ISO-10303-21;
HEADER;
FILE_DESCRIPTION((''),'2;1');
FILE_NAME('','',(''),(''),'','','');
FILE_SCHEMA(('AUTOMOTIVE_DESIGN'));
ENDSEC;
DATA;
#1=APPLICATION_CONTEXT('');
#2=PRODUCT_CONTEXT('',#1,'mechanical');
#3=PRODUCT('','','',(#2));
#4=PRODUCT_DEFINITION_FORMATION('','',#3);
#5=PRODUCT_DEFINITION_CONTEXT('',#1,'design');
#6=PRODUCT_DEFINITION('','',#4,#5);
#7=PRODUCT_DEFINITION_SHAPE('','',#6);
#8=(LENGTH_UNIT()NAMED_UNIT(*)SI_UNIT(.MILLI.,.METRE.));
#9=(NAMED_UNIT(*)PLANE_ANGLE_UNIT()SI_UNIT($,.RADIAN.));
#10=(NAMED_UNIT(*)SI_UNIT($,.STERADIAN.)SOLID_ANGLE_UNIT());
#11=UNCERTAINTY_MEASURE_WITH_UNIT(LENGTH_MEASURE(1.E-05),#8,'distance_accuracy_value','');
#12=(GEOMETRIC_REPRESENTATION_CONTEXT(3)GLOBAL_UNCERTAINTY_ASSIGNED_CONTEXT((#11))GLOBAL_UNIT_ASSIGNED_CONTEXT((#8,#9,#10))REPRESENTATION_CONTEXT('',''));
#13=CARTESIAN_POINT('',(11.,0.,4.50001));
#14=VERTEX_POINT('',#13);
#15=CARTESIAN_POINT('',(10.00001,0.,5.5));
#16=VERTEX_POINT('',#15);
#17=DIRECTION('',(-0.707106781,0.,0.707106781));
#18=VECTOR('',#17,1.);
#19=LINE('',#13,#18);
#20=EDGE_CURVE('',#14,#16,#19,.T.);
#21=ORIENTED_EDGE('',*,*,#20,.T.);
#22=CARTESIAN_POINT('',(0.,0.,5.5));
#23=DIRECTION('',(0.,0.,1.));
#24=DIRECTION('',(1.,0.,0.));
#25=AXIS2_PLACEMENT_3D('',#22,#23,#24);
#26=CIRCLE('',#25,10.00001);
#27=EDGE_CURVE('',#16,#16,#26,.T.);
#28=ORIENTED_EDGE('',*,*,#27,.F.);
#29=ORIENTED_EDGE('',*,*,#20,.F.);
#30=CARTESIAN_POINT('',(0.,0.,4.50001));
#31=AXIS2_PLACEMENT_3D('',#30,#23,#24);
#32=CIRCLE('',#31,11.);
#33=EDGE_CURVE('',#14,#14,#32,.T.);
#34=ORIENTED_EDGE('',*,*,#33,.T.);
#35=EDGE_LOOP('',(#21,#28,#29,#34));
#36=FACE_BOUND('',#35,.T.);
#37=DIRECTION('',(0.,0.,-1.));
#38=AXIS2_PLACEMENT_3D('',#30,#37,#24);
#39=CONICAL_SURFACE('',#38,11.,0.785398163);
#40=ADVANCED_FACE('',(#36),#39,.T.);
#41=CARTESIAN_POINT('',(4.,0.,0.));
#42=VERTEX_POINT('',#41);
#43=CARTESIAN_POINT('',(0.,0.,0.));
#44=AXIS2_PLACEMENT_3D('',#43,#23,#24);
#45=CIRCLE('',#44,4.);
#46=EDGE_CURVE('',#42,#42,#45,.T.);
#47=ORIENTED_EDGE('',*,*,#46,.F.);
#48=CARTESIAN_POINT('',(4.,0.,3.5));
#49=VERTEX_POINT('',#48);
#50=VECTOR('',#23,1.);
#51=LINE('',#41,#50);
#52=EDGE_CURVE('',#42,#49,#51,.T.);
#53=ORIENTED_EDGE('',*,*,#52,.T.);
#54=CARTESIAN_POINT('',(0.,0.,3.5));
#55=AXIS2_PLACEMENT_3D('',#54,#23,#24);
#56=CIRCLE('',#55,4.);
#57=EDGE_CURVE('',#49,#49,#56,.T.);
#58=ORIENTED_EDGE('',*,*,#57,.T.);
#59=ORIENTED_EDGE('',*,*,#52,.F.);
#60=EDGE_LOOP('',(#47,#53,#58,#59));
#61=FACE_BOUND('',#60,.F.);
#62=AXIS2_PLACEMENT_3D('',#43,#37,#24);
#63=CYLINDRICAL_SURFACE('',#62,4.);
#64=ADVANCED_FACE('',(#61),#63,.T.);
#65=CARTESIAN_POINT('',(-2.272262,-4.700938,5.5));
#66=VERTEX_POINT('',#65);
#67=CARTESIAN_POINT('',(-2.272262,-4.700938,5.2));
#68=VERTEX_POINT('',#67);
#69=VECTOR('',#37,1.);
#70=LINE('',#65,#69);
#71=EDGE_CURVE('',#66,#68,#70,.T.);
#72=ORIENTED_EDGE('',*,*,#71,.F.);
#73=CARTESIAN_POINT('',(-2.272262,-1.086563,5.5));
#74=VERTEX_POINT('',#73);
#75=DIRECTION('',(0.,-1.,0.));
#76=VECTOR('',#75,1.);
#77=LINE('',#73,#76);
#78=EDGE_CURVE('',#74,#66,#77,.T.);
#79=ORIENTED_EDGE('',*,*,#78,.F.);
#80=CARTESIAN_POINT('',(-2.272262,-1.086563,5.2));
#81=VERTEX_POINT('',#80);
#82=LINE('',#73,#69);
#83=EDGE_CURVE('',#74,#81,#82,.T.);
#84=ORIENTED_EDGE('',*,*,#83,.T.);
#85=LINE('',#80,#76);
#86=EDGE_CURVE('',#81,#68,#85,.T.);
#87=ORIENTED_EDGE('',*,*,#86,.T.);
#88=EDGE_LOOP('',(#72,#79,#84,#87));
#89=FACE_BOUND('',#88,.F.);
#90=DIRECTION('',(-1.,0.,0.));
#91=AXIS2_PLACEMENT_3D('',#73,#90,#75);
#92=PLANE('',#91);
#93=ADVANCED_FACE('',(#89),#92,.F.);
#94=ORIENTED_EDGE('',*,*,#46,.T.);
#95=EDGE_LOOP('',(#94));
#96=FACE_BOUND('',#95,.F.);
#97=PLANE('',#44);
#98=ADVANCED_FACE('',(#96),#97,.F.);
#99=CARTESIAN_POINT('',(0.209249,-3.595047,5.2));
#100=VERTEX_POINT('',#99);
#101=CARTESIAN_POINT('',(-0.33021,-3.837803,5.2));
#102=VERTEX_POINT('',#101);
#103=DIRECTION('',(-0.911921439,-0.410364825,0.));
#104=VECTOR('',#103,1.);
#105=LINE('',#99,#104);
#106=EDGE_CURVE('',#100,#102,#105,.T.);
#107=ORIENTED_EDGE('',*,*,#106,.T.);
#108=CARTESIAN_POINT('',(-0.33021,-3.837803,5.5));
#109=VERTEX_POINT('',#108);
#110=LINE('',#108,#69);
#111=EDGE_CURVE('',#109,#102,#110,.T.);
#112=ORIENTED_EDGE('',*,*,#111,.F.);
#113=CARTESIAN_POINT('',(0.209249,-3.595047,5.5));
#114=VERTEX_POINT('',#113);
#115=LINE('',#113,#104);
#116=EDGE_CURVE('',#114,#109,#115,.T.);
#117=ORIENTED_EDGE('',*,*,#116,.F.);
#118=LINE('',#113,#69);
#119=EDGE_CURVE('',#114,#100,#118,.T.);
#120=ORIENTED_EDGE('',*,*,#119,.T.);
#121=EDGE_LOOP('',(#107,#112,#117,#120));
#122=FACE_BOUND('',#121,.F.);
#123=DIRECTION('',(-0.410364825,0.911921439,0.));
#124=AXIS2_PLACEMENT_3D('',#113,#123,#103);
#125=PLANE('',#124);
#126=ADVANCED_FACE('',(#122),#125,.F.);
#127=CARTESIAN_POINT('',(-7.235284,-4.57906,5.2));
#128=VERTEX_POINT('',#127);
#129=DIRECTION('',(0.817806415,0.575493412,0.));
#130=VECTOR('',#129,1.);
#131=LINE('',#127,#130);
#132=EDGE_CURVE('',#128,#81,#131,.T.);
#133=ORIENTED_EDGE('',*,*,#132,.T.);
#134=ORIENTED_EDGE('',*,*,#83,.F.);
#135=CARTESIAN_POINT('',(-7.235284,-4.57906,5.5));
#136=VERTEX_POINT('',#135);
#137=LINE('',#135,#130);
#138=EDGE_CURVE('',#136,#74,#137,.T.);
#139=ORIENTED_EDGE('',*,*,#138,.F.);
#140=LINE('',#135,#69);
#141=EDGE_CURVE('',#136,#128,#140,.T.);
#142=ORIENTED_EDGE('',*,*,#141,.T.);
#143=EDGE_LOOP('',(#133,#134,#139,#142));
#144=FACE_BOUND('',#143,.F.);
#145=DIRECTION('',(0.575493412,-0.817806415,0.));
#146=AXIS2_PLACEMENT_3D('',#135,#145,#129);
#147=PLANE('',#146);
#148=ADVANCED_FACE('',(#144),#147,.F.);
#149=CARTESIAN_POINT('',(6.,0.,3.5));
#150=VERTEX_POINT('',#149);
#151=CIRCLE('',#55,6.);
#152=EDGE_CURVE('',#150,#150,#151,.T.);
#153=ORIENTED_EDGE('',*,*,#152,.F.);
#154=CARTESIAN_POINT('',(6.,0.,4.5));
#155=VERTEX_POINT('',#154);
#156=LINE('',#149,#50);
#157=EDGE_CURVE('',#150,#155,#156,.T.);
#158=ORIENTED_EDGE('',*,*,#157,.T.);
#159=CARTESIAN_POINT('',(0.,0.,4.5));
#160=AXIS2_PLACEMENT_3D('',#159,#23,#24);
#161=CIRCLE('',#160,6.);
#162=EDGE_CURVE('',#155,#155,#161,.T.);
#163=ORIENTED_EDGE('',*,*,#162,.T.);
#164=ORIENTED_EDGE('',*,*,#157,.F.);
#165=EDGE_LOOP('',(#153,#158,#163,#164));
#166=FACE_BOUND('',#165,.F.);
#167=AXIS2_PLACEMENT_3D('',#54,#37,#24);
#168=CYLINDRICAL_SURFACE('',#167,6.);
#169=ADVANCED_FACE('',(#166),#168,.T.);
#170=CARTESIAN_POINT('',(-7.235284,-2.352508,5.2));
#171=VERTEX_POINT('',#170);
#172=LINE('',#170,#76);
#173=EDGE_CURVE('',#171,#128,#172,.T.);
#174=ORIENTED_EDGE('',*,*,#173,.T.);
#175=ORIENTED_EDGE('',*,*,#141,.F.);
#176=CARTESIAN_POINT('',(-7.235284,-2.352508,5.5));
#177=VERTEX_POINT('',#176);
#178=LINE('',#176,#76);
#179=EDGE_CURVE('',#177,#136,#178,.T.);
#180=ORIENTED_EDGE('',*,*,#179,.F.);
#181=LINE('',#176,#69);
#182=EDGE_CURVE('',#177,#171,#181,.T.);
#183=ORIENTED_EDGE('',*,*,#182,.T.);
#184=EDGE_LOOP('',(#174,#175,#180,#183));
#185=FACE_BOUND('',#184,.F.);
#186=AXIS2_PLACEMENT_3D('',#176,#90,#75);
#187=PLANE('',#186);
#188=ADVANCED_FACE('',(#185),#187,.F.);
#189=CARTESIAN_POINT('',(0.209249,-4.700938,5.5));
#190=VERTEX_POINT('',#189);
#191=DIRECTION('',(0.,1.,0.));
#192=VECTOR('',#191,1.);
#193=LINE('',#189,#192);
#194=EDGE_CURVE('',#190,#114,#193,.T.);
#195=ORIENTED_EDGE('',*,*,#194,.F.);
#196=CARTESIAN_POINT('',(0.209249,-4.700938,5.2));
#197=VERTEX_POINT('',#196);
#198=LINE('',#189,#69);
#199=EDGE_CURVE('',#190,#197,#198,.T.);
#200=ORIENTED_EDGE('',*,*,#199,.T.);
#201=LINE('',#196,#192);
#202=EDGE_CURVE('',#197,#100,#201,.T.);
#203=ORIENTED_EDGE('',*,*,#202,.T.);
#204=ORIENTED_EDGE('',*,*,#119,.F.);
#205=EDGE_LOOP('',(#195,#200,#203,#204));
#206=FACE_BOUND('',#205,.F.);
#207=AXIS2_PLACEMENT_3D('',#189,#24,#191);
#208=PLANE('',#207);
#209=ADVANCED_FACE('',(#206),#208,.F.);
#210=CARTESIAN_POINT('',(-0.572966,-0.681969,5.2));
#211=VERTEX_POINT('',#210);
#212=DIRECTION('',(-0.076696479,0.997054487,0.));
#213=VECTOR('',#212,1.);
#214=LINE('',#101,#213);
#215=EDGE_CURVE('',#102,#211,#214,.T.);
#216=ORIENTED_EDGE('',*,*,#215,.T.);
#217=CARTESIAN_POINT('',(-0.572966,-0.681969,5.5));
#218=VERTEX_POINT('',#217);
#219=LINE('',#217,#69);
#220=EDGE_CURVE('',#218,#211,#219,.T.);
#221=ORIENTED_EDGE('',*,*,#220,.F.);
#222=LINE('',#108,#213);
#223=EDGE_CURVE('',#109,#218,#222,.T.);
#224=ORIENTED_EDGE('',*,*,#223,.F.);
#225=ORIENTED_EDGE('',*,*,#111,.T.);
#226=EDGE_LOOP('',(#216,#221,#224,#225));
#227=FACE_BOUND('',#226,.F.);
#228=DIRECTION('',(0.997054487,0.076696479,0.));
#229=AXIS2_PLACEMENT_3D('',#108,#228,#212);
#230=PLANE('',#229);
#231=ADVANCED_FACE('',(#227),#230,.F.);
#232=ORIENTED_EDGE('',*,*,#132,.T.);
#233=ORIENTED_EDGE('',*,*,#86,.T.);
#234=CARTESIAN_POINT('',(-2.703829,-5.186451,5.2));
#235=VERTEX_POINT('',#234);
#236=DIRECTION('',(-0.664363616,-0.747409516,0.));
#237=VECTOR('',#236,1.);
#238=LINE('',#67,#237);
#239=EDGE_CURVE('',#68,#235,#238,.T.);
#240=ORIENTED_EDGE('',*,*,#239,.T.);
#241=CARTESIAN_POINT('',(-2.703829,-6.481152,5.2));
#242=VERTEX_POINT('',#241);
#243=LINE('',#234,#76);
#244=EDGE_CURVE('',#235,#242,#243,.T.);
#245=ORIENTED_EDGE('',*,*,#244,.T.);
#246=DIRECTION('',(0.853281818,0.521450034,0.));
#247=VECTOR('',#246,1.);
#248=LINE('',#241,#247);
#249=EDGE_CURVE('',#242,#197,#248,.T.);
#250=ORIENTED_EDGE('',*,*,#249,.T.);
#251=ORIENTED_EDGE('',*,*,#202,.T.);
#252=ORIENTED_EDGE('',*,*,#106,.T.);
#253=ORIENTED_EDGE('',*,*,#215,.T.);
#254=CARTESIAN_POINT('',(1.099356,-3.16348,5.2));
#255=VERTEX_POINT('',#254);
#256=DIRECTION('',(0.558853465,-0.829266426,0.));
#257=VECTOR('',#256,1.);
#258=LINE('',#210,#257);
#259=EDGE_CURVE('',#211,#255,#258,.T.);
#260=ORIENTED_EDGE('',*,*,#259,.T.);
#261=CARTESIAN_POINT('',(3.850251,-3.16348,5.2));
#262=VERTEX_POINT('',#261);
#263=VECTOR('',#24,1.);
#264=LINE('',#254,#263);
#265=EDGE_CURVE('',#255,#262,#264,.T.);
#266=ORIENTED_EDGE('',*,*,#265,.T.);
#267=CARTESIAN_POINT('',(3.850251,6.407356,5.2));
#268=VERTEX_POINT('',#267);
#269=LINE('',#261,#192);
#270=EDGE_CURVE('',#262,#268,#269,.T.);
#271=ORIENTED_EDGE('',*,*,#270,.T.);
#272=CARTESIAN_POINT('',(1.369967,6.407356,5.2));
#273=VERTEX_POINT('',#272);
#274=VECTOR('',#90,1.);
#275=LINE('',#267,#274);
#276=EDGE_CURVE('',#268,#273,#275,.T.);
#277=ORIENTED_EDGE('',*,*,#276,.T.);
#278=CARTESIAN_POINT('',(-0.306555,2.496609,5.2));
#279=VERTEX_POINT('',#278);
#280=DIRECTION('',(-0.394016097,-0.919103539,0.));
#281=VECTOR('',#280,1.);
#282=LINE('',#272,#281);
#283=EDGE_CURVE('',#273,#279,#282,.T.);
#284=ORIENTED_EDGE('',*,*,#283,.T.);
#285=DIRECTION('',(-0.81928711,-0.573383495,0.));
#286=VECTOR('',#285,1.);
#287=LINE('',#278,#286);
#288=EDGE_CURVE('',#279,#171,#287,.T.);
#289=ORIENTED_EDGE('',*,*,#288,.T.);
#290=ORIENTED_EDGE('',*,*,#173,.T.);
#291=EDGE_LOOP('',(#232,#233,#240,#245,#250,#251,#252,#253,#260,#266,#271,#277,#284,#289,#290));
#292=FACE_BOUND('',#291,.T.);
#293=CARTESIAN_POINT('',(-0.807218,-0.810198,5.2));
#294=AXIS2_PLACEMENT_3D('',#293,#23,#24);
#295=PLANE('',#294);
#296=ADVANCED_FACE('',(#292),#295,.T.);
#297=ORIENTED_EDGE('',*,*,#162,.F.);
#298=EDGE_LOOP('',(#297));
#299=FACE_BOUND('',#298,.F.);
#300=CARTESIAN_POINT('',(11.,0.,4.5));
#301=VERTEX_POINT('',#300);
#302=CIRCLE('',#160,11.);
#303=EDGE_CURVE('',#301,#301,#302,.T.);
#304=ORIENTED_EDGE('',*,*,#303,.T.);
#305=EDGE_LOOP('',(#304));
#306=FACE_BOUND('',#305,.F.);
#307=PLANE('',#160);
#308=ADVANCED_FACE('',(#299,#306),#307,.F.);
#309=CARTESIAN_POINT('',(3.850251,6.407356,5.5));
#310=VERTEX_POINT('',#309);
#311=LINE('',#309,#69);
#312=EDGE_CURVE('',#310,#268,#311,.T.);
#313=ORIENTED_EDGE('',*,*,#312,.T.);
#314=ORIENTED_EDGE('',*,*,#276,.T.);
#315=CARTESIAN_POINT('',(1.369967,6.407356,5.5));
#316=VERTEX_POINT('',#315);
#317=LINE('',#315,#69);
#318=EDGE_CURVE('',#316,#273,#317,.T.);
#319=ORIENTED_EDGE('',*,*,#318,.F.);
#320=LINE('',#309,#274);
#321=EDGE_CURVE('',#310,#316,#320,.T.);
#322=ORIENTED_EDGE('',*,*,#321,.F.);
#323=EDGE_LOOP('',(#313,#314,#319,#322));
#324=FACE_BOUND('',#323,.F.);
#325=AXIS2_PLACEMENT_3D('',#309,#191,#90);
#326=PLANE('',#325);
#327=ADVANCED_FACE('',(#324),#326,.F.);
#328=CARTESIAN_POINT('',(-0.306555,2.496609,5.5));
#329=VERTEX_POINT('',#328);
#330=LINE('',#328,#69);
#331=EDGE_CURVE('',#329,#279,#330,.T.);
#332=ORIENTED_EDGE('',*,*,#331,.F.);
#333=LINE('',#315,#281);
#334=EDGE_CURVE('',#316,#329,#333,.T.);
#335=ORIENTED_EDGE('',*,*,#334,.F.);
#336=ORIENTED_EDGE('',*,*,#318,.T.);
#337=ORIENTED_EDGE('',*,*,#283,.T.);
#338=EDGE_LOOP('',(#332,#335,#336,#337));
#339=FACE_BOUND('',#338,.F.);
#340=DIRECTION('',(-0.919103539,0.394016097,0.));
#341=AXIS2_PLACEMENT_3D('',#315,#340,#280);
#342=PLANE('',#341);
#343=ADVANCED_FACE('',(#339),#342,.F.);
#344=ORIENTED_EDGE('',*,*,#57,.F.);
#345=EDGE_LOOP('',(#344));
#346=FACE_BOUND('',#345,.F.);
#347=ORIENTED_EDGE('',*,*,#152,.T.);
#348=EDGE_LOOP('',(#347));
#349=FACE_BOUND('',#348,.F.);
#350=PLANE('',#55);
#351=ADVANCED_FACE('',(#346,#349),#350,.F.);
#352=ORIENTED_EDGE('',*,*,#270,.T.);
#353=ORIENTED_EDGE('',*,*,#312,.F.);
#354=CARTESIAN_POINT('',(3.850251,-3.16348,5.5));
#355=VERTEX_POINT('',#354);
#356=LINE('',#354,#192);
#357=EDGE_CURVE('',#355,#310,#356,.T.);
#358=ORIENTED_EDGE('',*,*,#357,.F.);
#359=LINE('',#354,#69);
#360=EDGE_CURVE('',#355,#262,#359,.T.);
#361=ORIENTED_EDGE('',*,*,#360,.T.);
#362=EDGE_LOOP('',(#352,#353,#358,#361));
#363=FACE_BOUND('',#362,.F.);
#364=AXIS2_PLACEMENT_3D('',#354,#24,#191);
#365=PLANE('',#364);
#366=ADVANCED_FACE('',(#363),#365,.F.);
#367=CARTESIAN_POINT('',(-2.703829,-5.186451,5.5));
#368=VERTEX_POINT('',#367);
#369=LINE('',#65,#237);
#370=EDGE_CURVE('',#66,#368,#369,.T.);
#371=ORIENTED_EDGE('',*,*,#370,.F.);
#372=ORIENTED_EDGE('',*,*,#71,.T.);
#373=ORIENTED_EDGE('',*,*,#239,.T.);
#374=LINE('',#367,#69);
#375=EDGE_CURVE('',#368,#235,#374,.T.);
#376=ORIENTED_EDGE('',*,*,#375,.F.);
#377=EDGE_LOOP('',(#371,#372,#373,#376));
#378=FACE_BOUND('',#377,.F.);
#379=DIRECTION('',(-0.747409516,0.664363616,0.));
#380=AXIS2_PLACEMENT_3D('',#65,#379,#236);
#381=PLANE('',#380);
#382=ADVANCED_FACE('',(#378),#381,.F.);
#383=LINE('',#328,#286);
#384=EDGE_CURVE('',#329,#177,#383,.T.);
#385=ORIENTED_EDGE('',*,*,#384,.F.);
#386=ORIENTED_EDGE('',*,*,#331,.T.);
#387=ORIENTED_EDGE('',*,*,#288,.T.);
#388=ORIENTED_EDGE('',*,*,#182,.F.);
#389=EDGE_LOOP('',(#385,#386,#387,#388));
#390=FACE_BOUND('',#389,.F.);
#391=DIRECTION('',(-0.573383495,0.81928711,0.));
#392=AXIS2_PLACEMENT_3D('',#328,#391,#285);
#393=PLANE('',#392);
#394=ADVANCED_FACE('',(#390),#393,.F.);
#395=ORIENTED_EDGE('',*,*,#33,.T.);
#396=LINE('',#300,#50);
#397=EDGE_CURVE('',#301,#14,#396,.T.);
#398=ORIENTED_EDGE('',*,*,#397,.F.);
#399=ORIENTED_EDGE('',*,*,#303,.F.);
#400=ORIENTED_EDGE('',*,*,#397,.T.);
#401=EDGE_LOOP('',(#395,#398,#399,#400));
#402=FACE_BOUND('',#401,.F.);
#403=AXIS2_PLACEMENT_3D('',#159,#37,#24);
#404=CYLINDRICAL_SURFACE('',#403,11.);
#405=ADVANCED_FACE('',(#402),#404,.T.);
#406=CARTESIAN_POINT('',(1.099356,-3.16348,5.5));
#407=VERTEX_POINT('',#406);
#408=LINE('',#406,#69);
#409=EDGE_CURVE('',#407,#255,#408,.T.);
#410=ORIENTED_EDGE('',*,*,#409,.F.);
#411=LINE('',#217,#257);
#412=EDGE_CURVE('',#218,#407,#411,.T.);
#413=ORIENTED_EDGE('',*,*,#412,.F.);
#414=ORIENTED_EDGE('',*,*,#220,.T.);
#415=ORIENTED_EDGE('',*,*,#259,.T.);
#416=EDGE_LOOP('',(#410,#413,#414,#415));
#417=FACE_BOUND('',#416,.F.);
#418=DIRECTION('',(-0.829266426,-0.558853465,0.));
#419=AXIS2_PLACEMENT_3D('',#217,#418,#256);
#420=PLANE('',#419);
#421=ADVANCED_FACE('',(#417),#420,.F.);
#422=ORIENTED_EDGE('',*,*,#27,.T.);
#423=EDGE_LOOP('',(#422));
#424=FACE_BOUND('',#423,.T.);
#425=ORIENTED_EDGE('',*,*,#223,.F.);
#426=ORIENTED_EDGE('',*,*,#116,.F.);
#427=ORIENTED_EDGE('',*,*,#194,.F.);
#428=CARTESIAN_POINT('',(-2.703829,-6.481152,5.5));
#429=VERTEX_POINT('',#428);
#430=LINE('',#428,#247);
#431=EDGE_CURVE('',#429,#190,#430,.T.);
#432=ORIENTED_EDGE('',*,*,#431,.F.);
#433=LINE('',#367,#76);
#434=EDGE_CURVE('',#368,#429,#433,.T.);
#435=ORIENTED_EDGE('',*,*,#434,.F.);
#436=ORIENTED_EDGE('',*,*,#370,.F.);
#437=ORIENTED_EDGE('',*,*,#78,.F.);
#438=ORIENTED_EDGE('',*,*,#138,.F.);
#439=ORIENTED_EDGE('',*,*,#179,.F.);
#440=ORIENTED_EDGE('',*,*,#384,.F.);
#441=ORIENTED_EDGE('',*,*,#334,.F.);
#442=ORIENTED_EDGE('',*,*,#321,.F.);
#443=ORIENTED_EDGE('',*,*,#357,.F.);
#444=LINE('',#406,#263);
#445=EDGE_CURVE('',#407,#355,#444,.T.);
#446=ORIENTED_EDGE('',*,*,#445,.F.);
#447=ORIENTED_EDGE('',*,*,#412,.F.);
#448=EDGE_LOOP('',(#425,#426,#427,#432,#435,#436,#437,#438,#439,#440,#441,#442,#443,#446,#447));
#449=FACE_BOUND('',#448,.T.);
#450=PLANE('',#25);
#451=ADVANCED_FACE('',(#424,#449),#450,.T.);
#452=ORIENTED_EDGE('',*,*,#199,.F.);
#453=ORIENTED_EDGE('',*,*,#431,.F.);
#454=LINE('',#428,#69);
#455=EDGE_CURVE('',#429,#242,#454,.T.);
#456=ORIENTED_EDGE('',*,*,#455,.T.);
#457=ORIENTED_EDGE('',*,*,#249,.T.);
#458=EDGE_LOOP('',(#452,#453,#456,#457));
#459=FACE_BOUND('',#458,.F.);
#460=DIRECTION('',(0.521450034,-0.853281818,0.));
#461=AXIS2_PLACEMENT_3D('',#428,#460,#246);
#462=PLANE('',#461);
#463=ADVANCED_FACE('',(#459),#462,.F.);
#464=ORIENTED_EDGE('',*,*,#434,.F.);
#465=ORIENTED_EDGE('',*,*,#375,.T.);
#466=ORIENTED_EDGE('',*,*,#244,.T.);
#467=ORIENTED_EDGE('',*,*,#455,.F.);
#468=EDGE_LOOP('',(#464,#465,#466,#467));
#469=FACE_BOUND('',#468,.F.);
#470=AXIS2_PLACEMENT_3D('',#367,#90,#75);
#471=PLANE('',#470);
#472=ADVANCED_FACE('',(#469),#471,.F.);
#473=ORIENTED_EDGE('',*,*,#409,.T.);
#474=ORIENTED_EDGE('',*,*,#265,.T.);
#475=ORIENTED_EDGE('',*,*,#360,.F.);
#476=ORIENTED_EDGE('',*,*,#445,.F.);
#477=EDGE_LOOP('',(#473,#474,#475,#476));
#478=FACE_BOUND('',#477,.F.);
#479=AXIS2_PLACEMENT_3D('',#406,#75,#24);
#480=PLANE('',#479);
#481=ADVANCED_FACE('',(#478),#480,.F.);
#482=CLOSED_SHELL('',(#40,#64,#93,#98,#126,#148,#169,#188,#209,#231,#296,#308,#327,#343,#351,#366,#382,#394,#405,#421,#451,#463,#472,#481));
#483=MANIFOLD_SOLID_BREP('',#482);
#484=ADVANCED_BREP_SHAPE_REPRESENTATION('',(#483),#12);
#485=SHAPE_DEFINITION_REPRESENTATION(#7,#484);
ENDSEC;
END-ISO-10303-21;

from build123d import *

# Parameters (mm, degrees)
F0_R     = 4
F1_DEPTH = 3.5
F2_R     = 6
F3_DEPTH = 1
F4_R     = 11
F5_DEPTH = 1
F6_SIZE  = 0.99999
F8_DEPTH = 0.3


# Not quite as in the source:
# - a fillet or chamfer is up to 0.001 mm smaller than in the source, because OpenCascade refuses the exact size


with BuildPart() as f1:
    # F0 (on Top) → F1 (new body)
    with BuildSketch(Plane.XY):
        Circle(F0_R)
    extrude(amount=F1_DEPTH)

    # F2 (on face) → F3 (join)
    with BuildSketch(Plane.XY.offset(3.5)):
        Circle(F2_R)
    extrude(amount=F3_DEPTH)

    # F4 (on face) → F5 (join)
    with BuildSketch(Plane.XY.offset(4.5)):
        Circle(F4_R)
    extrude(amount=F5_DEPTH)

    # F6 (size 1 in the source; OpenCascade refuses exactly that, so slightly less here)
    f6_edges = [f1.edges().sort_by_distance(p)[0] for p in [
        (-11, 0, 5.5),
    ]]
    chamfer(f6_edges, length=F6_SIZE)

    # F7 (on face) → F8 (cut)
    with BuildSketch(Plane.XY.offset(5.5)):
        Polygon((1.3699667839, 6.4073562332), (-0.3065554774, 2.496608533), (-7.2352840317, -2.3525079081), (-7.2352840317, -4.5790599288), (-2.2722620734, -1.0865629438), (-2.2722620734, -4.7009375549), (-2.7038290382, -5.1864506813), (-2.7038290382, -6.4811520415), (0.2092490221, -4.7009375549), (0.2092490221, -3.5950467127), (-0.3302100332, -3.8378033924), (-0.57296648, -0.6819687688), (1.099356149, -3.1634797479), (2.4749761405, -3.1634797479), (3.8502510524, -3.1634797479), (3.8502510524, 4.6872763105), (3.8502510524, 6.4073562332), align=None)
    extrude(amount=-F8_DEPTH, mode=Mode.SUBTRACT)


solid = f1.part
